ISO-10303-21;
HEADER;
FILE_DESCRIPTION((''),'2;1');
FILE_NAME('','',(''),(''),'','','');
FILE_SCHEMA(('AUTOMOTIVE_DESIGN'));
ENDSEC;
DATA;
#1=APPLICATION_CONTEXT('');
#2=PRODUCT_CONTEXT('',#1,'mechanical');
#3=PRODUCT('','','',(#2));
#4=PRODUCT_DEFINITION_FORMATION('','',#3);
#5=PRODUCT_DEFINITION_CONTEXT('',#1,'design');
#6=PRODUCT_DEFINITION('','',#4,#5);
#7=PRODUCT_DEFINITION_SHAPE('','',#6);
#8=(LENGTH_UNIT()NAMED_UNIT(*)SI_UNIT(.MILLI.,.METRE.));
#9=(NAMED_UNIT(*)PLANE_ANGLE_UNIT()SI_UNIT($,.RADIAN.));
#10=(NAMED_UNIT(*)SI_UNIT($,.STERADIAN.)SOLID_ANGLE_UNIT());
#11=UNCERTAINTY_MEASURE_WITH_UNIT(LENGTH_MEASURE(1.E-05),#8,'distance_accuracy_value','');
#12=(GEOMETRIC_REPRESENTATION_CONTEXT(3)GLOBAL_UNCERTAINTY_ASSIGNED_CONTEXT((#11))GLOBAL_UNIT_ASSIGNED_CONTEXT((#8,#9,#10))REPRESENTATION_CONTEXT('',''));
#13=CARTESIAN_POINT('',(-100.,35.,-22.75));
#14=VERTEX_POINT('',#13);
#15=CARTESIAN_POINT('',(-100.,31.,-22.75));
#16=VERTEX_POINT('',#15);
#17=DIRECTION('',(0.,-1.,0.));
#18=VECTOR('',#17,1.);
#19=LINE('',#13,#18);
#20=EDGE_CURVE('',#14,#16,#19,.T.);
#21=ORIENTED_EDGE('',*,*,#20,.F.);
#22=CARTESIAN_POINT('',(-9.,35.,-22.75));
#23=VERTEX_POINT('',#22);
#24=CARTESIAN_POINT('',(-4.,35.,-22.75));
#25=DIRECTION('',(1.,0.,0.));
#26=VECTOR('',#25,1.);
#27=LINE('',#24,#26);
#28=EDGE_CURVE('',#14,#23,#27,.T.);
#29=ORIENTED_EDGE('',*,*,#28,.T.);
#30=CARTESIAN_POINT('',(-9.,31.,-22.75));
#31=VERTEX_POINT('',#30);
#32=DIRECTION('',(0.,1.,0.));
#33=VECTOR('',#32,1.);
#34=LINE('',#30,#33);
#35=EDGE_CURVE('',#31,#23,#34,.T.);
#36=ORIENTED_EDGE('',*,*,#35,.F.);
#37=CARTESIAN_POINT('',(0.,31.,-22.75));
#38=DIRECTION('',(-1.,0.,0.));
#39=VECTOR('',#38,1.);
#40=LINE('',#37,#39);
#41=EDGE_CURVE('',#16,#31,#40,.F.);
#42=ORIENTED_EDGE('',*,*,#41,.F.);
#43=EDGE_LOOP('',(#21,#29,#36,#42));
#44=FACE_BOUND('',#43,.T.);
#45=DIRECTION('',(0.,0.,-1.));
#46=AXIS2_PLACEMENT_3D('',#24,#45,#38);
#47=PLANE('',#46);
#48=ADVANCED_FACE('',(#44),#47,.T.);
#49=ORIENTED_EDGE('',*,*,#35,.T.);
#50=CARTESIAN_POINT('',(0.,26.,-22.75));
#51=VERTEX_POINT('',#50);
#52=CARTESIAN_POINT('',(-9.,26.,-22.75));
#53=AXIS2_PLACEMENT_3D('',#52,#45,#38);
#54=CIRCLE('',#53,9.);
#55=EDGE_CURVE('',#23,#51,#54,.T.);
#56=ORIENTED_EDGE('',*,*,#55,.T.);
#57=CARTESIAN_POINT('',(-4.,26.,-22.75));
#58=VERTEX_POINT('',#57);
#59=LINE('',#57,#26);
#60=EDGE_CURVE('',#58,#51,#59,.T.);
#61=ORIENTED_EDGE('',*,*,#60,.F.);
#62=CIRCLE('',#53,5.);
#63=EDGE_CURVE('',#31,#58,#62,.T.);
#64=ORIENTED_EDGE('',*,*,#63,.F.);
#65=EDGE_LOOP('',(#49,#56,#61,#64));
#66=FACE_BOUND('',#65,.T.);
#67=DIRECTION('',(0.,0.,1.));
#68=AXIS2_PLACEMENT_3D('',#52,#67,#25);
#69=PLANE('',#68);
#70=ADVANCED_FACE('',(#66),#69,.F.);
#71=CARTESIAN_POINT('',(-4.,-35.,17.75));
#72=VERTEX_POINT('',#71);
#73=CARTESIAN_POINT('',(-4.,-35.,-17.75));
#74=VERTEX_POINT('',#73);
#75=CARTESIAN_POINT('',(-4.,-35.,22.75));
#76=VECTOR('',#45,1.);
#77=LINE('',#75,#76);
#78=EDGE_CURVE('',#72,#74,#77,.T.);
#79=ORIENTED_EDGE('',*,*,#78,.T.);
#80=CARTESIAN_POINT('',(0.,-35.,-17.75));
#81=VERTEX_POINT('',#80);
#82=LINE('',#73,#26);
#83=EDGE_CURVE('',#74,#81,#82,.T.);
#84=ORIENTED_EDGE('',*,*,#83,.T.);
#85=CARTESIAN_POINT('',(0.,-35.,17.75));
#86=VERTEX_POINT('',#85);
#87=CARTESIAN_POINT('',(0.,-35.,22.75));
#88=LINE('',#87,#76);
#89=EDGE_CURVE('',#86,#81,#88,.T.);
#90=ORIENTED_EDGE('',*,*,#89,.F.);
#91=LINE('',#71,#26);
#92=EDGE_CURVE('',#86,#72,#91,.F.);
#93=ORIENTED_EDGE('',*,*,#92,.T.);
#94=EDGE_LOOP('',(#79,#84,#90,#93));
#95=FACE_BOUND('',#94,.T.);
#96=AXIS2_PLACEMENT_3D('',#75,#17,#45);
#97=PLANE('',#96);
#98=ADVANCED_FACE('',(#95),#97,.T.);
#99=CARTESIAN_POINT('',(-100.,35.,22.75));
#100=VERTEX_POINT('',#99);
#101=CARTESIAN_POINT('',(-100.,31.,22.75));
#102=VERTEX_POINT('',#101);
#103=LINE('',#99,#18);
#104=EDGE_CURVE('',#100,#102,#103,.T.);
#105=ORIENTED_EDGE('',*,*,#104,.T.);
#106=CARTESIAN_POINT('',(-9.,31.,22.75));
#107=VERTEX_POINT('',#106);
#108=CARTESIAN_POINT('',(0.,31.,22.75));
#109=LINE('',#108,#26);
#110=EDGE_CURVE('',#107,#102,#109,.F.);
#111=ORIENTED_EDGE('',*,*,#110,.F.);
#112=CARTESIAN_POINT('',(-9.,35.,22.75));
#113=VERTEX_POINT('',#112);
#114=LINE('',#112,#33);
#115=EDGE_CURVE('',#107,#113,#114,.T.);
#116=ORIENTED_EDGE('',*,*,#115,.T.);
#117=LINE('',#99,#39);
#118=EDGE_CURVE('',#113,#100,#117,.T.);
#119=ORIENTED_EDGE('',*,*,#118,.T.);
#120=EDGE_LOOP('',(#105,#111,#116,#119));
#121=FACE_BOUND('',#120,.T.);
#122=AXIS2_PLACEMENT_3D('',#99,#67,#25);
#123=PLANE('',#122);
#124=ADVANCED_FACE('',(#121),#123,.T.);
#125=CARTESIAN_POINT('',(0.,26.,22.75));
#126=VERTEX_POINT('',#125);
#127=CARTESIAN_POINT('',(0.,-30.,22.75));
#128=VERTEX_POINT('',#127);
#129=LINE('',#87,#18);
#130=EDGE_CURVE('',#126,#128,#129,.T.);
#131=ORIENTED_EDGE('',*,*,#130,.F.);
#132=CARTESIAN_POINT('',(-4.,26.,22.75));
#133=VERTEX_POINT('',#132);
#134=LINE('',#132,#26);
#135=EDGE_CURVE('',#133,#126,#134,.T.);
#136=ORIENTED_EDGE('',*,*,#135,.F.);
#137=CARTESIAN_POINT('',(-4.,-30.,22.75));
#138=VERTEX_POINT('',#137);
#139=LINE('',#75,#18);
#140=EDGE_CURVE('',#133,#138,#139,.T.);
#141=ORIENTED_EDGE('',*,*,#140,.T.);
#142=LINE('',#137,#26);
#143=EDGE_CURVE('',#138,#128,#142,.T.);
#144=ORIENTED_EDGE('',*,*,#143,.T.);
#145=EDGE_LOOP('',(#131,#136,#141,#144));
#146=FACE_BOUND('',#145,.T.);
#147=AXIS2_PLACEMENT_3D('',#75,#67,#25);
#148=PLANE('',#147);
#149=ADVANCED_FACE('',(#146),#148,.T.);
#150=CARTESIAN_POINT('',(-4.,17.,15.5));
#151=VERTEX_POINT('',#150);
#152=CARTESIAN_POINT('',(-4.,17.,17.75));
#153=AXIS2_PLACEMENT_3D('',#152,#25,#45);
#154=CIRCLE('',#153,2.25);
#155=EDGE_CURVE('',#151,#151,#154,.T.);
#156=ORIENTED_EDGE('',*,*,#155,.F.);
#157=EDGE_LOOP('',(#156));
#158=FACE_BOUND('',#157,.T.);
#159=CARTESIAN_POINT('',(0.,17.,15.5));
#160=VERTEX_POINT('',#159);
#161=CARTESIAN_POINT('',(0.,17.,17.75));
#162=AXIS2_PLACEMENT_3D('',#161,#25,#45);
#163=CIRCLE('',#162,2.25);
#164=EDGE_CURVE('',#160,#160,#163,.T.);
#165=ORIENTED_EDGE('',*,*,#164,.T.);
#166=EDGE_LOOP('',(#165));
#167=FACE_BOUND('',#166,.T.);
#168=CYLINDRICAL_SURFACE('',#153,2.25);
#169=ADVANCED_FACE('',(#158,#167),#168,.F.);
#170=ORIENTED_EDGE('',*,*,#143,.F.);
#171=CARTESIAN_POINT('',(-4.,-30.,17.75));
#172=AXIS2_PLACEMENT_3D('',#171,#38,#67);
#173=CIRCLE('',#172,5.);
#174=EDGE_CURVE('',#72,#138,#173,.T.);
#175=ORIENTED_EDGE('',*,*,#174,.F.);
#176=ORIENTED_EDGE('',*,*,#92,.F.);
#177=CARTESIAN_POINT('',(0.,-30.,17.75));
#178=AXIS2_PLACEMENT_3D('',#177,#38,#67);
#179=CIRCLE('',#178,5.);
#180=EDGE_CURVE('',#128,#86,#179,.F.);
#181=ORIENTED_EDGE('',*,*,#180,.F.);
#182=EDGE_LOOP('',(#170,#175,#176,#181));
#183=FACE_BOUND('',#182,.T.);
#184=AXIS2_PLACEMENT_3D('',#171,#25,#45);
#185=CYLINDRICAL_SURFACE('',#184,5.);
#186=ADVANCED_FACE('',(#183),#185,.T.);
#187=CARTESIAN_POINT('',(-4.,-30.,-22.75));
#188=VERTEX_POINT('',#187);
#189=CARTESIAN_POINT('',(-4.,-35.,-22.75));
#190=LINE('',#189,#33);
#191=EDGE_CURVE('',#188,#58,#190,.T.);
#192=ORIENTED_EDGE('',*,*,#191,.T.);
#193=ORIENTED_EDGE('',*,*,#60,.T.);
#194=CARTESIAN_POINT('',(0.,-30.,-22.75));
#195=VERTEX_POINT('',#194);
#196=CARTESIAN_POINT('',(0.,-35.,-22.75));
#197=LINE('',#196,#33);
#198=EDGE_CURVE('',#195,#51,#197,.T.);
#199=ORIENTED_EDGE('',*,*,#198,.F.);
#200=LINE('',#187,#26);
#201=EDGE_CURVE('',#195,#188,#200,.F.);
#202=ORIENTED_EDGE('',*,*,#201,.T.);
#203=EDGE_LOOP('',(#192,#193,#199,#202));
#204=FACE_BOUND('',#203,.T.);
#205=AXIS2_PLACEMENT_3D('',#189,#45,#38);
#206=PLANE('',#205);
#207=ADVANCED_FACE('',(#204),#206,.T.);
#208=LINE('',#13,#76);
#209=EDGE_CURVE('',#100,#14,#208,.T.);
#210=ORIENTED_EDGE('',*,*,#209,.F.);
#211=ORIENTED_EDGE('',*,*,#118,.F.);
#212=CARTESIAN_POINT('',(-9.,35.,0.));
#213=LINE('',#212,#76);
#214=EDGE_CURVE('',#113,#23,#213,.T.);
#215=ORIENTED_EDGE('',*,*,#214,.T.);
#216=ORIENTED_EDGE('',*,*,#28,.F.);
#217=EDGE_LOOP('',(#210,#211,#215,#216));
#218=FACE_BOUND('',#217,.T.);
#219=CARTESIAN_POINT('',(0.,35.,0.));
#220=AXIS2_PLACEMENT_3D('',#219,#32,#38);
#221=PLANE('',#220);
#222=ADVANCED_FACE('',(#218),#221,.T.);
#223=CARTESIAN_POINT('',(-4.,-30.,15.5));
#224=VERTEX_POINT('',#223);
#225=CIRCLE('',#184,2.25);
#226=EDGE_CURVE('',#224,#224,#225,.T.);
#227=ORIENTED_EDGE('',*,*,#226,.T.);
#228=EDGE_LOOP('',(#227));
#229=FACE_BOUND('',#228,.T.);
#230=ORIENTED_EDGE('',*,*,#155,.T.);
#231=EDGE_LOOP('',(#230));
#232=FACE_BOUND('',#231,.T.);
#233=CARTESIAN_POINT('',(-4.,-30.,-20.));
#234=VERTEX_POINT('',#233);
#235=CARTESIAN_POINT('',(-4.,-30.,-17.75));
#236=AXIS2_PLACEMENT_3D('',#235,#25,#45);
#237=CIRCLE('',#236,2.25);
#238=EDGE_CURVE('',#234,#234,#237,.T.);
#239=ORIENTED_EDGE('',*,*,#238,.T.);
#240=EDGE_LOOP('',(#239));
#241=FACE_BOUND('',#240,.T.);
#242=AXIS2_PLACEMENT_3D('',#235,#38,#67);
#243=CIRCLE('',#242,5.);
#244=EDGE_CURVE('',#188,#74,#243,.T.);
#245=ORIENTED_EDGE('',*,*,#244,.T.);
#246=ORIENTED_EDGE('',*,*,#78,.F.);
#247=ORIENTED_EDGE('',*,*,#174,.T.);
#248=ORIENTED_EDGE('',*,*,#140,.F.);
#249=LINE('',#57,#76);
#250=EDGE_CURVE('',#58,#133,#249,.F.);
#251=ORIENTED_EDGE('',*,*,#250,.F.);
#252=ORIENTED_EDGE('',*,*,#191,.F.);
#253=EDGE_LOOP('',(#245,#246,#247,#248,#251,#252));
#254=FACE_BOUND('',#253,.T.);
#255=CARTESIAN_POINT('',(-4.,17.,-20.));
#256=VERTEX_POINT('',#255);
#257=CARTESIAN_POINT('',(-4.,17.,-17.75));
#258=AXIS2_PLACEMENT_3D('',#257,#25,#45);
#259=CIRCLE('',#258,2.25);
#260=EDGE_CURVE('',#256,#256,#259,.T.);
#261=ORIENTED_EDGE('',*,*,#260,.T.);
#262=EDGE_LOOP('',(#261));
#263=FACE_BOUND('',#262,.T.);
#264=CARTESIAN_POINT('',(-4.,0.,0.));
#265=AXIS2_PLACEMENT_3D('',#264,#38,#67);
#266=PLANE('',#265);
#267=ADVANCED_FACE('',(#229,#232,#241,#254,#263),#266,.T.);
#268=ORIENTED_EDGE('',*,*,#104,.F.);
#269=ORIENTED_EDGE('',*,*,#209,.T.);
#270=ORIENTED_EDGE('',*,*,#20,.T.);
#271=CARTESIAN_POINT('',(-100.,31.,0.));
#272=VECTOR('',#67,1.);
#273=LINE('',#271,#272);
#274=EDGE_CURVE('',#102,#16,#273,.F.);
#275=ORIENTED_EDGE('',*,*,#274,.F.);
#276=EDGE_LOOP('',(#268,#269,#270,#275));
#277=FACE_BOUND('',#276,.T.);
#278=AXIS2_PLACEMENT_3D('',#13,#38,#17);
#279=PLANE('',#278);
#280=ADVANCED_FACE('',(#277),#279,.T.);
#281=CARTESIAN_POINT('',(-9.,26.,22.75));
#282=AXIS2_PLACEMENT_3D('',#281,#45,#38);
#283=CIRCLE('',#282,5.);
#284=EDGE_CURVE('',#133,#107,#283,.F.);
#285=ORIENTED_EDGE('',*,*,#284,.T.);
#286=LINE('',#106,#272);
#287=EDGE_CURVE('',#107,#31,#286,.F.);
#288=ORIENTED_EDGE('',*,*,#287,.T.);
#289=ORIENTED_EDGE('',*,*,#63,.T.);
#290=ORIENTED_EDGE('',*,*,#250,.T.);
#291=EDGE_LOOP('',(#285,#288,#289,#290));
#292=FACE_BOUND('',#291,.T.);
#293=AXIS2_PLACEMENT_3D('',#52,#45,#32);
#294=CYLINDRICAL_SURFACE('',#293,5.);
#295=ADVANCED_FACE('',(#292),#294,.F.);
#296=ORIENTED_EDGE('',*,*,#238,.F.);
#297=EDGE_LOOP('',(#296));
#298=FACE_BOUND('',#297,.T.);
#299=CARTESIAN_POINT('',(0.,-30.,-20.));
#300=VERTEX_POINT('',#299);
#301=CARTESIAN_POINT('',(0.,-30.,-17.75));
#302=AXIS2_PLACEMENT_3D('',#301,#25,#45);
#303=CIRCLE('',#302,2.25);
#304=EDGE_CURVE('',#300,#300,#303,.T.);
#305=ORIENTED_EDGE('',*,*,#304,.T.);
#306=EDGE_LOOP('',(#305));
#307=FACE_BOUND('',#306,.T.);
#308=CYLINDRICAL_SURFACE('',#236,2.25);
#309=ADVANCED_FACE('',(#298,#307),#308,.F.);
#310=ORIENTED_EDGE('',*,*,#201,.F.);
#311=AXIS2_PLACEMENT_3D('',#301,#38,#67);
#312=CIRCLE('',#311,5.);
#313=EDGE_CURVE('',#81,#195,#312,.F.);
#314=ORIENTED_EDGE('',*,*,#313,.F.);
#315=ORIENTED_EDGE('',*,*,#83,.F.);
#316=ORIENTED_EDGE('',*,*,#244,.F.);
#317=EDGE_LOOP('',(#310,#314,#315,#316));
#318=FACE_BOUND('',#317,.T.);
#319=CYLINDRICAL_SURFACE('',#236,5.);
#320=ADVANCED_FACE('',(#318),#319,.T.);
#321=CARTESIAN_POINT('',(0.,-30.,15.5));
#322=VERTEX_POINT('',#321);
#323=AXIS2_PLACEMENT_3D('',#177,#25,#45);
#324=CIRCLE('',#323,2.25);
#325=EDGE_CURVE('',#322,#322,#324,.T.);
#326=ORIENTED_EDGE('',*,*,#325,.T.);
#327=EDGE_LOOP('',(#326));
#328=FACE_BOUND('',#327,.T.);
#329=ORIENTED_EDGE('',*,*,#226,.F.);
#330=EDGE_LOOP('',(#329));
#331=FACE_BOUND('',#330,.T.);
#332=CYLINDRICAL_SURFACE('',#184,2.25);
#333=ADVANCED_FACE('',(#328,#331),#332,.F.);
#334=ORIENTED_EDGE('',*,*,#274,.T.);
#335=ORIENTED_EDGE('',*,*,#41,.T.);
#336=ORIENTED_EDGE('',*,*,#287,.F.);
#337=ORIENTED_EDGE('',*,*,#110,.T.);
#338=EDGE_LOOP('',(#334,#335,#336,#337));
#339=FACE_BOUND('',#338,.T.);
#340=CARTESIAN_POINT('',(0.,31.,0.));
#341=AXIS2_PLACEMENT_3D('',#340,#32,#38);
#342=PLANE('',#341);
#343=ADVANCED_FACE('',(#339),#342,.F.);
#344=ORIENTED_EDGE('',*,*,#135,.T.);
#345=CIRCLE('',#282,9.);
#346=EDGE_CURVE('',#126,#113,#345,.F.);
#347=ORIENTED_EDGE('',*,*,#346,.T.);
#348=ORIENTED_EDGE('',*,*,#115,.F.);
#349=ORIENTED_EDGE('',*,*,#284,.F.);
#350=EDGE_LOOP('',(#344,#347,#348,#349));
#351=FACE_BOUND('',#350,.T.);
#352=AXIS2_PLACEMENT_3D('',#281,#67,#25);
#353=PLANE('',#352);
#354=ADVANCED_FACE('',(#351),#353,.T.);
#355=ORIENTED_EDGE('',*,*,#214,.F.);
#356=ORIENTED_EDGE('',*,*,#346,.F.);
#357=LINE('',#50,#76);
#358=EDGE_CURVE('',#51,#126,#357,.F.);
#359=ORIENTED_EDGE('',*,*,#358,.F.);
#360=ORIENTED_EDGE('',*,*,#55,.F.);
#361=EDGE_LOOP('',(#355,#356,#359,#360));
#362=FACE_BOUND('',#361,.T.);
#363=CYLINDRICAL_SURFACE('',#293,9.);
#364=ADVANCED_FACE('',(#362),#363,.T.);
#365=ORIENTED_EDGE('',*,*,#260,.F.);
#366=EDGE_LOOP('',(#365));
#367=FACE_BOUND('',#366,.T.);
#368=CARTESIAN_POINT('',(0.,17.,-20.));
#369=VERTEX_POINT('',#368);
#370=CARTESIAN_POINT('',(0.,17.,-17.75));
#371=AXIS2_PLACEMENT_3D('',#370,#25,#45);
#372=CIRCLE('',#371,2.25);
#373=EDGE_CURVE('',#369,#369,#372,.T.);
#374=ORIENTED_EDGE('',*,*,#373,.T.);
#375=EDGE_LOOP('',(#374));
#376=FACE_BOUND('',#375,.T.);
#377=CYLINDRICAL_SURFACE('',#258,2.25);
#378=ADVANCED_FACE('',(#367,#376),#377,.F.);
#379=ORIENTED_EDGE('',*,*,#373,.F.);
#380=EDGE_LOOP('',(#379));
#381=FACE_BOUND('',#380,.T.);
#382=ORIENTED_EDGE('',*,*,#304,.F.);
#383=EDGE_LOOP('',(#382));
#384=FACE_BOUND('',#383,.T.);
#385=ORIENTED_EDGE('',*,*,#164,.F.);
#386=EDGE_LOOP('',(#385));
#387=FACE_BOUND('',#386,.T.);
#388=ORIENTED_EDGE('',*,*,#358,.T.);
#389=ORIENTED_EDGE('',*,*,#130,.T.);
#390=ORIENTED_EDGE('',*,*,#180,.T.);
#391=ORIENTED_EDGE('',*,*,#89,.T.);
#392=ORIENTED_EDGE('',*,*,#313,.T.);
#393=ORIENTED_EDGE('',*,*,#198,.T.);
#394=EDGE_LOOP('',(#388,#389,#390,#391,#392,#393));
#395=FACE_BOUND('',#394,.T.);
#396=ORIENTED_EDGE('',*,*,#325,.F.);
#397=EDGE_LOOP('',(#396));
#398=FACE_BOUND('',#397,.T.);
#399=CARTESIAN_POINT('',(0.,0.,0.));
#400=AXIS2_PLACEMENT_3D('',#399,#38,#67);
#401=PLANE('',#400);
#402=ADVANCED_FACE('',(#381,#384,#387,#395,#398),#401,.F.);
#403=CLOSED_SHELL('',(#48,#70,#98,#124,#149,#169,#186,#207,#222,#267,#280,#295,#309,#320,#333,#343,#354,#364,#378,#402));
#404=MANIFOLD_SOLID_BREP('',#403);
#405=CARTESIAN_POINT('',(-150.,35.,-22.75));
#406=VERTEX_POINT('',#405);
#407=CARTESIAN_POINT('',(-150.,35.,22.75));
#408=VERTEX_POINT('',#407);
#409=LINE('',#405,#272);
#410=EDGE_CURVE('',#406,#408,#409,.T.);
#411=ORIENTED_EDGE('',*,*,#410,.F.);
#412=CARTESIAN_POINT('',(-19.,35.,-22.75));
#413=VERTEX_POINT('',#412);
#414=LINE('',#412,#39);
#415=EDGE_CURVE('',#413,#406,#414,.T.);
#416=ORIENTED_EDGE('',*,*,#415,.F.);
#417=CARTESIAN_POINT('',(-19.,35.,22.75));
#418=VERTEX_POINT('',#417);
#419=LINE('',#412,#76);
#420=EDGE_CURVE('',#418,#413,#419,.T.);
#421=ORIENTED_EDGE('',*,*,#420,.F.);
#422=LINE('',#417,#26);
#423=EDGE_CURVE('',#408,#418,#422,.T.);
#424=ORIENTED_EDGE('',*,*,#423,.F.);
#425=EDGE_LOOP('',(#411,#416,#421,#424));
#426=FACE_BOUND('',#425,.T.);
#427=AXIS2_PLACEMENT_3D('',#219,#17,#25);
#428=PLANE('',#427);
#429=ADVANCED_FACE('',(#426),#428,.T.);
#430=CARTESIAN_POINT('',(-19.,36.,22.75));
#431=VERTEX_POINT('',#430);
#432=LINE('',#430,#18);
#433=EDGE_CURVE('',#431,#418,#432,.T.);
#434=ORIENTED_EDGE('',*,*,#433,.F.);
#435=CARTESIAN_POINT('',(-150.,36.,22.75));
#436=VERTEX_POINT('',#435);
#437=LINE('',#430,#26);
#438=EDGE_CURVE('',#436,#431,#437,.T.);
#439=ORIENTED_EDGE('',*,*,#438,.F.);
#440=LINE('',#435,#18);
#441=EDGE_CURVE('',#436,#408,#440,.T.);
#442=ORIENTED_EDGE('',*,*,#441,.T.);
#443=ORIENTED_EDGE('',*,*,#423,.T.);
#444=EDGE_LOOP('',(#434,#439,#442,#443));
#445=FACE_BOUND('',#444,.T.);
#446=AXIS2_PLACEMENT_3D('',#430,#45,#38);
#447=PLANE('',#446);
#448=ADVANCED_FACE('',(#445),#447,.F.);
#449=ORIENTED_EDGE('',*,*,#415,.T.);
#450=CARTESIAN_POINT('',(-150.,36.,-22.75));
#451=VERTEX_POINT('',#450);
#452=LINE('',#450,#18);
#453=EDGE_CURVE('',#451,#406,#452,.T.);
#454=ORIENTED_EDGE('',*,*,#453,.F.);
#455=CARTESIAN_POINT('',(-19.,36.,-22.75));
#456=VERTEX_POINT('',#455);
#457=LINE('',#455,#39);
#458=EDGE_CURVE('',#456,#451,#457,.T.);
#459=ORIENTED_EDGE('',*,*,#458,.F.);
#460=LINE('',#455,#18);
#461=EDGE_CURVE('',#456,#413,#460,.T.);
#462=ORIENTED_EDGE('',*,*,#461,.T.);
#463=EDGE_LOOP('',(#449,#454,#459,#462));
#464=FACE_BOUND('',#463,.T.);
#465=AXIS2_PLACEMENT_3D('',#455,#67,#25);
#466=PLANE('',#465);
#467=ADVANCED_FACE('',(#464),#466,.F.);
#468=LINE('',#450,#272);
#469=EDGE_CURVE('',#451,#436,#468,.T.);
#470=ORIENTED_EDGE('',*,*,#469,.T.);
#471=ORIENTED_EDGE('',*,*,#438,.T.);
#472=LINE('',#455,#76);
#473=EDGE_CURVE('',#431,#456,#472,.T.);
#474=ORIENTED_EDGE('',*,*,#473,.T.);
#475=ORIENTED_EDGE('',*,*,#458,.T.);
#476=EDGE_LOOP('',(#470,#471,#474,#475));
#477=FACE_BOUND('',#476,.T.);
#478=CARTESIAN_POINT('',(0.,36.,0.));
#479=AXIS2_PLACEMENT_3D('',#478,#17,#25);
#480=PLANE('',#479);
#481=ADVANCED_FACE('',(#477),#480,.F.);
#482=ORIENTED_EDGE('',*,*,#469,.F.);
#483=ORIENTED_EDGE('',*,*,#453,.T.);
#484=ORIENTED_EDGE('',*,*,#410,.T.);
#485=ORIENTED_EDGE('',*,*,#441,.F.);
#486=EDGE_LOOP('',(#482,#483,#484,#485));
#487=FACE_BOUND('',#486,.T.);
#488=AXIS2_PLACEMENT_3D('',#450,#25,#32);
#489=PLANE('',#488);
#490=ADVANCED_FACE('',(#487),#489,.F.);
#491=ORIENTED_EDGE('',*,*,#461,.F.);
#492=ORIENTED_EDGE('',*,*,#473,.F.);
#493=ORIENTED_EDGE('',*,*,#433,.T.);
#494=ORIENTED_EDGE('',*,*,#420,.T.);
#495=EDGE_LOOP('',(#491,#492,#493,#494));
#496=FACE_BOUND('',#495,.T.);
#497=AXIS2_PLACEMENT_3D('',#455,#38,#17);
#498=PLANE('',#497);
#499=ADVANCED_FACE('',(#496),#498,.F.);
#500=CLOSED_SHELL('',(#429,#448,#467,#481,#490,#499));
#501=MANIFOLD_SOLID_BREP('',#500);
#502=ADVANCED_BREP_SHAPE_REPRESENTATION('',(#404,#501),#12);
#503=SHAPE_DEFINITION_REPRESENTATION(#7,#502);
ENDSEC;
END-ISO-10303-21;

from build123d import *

# Parameters (mm, degrees)
SKETCH1_W                    = 45.5
SKETCH1_H                    = 70
SKETCH1_R                    = 2.25
BASE_FLANGE1_DEPTH           = 4
EDGE_FLANGE1_STRIP_W         = 26
EDGE_FLANGE1_STRIP_H         = 4
EDGE_FLANGE1_STRIP_CUT_DEPTH = 45.5
EDGE_FLANGE1_DEPTH           = 45.5
SKETCH9_W                    = 131
SKETCH9_H                    = 45.5
BOSS_EXTRUDE1_DEPTH          = 1
FILLET1_R                    = 5


# Sheet-metal steps are written as plain solids
with BuildPart() as part:
    # Sketch1 → Base-Flange1 (new body)
    with BuildSketch(Plane(origin=(0, 0, 0), x_dir=(0, 0, -1), z_dir=(1, 0, 0))):
        Rectangle(SKETCH1_W, SKETCH1_H)
        with Locations((-17.75, -30)):
            Circle(SKETCH1_R, mode=Mode.SUBTRACT)
        with Locations((17.75, -30)):
            Circle(SKETCH1_R, mode=Mode.SUBTRACT)
        with Locations((17.75, 17)):
            Circle(SKETCH1_R, mode=Mode.SUBTRACT)
        with Locations((-17.75, 17)):
            Circle(SKETCH1_R, mode=Mode.SUBTRACT)
    extrude(amount=-BASE_FLANGE1_DEPTH)

    # Edge-Flange1 strip (across the edge) → Edge-Flange1 strip cut (cut)
    with BuildSketch(Plane(origin=(-4, 35, 22.75), x_dir=(0, -1, 0), z_dir=(0, 0, -1))):
        with Locations((-4, -2)):
            Rectangle(EDGE_FLANGE1_STRIP_W, EDGE_FLANGE1_STRIP_H)
    extrude(amount=EDGE_FLANGE1_STRIP_CUT_DEPTH, mode=Mode.SUBTRACT)

    # Edge-Flange1 section (across the edge) → Edge-Flange1 (add)
    with BuildSketch(Plane(origin=(-4, 35, 22.75), x_dir=(0, -1, 0), z_dir=(0, 0, -1))):
        with BuildLine():
            Line((0, 5), (0, 96))
            Line((0, 96), (4, 96))
            Line((4, 96), (4, 5))
            ThreePointArc((4, 5), (5.464466094, 1.464466094), (9, 0))
            Line((9, 0), (9, -4))
            ThreePointArc((9, -4), (2.636038969, -1.363961031), (0, 5))
        make_face()
    extrude(amount=EDGE_FLANGE1_DEPTH)

    # Fillet1
    fillet1_edges = [part.edges().sort_by_distance(p)[0] for p in [
        (-2, -35, -22.75),
        (-2, -35, 22.75),
    ]]
    fillet(fillet1_edges, radius=FILLET1_R)


with BuildPart() as body_2:
    # Sketch9 → Boss-Extrude1 (new body)
    with BuildSketch(Plane(origin=(0, 35, 0), x_dir=(1, 0, 0), z_dir=(0, 1, 0))):
        with Locations((-84.5, 0)):
            Rectangle(SKETCH9_W, SKETCH9_H)
    extrude(amount=BOSS_EXTRUDE1_DEPTH)


solid = Compound([part.part, body_2.part])
